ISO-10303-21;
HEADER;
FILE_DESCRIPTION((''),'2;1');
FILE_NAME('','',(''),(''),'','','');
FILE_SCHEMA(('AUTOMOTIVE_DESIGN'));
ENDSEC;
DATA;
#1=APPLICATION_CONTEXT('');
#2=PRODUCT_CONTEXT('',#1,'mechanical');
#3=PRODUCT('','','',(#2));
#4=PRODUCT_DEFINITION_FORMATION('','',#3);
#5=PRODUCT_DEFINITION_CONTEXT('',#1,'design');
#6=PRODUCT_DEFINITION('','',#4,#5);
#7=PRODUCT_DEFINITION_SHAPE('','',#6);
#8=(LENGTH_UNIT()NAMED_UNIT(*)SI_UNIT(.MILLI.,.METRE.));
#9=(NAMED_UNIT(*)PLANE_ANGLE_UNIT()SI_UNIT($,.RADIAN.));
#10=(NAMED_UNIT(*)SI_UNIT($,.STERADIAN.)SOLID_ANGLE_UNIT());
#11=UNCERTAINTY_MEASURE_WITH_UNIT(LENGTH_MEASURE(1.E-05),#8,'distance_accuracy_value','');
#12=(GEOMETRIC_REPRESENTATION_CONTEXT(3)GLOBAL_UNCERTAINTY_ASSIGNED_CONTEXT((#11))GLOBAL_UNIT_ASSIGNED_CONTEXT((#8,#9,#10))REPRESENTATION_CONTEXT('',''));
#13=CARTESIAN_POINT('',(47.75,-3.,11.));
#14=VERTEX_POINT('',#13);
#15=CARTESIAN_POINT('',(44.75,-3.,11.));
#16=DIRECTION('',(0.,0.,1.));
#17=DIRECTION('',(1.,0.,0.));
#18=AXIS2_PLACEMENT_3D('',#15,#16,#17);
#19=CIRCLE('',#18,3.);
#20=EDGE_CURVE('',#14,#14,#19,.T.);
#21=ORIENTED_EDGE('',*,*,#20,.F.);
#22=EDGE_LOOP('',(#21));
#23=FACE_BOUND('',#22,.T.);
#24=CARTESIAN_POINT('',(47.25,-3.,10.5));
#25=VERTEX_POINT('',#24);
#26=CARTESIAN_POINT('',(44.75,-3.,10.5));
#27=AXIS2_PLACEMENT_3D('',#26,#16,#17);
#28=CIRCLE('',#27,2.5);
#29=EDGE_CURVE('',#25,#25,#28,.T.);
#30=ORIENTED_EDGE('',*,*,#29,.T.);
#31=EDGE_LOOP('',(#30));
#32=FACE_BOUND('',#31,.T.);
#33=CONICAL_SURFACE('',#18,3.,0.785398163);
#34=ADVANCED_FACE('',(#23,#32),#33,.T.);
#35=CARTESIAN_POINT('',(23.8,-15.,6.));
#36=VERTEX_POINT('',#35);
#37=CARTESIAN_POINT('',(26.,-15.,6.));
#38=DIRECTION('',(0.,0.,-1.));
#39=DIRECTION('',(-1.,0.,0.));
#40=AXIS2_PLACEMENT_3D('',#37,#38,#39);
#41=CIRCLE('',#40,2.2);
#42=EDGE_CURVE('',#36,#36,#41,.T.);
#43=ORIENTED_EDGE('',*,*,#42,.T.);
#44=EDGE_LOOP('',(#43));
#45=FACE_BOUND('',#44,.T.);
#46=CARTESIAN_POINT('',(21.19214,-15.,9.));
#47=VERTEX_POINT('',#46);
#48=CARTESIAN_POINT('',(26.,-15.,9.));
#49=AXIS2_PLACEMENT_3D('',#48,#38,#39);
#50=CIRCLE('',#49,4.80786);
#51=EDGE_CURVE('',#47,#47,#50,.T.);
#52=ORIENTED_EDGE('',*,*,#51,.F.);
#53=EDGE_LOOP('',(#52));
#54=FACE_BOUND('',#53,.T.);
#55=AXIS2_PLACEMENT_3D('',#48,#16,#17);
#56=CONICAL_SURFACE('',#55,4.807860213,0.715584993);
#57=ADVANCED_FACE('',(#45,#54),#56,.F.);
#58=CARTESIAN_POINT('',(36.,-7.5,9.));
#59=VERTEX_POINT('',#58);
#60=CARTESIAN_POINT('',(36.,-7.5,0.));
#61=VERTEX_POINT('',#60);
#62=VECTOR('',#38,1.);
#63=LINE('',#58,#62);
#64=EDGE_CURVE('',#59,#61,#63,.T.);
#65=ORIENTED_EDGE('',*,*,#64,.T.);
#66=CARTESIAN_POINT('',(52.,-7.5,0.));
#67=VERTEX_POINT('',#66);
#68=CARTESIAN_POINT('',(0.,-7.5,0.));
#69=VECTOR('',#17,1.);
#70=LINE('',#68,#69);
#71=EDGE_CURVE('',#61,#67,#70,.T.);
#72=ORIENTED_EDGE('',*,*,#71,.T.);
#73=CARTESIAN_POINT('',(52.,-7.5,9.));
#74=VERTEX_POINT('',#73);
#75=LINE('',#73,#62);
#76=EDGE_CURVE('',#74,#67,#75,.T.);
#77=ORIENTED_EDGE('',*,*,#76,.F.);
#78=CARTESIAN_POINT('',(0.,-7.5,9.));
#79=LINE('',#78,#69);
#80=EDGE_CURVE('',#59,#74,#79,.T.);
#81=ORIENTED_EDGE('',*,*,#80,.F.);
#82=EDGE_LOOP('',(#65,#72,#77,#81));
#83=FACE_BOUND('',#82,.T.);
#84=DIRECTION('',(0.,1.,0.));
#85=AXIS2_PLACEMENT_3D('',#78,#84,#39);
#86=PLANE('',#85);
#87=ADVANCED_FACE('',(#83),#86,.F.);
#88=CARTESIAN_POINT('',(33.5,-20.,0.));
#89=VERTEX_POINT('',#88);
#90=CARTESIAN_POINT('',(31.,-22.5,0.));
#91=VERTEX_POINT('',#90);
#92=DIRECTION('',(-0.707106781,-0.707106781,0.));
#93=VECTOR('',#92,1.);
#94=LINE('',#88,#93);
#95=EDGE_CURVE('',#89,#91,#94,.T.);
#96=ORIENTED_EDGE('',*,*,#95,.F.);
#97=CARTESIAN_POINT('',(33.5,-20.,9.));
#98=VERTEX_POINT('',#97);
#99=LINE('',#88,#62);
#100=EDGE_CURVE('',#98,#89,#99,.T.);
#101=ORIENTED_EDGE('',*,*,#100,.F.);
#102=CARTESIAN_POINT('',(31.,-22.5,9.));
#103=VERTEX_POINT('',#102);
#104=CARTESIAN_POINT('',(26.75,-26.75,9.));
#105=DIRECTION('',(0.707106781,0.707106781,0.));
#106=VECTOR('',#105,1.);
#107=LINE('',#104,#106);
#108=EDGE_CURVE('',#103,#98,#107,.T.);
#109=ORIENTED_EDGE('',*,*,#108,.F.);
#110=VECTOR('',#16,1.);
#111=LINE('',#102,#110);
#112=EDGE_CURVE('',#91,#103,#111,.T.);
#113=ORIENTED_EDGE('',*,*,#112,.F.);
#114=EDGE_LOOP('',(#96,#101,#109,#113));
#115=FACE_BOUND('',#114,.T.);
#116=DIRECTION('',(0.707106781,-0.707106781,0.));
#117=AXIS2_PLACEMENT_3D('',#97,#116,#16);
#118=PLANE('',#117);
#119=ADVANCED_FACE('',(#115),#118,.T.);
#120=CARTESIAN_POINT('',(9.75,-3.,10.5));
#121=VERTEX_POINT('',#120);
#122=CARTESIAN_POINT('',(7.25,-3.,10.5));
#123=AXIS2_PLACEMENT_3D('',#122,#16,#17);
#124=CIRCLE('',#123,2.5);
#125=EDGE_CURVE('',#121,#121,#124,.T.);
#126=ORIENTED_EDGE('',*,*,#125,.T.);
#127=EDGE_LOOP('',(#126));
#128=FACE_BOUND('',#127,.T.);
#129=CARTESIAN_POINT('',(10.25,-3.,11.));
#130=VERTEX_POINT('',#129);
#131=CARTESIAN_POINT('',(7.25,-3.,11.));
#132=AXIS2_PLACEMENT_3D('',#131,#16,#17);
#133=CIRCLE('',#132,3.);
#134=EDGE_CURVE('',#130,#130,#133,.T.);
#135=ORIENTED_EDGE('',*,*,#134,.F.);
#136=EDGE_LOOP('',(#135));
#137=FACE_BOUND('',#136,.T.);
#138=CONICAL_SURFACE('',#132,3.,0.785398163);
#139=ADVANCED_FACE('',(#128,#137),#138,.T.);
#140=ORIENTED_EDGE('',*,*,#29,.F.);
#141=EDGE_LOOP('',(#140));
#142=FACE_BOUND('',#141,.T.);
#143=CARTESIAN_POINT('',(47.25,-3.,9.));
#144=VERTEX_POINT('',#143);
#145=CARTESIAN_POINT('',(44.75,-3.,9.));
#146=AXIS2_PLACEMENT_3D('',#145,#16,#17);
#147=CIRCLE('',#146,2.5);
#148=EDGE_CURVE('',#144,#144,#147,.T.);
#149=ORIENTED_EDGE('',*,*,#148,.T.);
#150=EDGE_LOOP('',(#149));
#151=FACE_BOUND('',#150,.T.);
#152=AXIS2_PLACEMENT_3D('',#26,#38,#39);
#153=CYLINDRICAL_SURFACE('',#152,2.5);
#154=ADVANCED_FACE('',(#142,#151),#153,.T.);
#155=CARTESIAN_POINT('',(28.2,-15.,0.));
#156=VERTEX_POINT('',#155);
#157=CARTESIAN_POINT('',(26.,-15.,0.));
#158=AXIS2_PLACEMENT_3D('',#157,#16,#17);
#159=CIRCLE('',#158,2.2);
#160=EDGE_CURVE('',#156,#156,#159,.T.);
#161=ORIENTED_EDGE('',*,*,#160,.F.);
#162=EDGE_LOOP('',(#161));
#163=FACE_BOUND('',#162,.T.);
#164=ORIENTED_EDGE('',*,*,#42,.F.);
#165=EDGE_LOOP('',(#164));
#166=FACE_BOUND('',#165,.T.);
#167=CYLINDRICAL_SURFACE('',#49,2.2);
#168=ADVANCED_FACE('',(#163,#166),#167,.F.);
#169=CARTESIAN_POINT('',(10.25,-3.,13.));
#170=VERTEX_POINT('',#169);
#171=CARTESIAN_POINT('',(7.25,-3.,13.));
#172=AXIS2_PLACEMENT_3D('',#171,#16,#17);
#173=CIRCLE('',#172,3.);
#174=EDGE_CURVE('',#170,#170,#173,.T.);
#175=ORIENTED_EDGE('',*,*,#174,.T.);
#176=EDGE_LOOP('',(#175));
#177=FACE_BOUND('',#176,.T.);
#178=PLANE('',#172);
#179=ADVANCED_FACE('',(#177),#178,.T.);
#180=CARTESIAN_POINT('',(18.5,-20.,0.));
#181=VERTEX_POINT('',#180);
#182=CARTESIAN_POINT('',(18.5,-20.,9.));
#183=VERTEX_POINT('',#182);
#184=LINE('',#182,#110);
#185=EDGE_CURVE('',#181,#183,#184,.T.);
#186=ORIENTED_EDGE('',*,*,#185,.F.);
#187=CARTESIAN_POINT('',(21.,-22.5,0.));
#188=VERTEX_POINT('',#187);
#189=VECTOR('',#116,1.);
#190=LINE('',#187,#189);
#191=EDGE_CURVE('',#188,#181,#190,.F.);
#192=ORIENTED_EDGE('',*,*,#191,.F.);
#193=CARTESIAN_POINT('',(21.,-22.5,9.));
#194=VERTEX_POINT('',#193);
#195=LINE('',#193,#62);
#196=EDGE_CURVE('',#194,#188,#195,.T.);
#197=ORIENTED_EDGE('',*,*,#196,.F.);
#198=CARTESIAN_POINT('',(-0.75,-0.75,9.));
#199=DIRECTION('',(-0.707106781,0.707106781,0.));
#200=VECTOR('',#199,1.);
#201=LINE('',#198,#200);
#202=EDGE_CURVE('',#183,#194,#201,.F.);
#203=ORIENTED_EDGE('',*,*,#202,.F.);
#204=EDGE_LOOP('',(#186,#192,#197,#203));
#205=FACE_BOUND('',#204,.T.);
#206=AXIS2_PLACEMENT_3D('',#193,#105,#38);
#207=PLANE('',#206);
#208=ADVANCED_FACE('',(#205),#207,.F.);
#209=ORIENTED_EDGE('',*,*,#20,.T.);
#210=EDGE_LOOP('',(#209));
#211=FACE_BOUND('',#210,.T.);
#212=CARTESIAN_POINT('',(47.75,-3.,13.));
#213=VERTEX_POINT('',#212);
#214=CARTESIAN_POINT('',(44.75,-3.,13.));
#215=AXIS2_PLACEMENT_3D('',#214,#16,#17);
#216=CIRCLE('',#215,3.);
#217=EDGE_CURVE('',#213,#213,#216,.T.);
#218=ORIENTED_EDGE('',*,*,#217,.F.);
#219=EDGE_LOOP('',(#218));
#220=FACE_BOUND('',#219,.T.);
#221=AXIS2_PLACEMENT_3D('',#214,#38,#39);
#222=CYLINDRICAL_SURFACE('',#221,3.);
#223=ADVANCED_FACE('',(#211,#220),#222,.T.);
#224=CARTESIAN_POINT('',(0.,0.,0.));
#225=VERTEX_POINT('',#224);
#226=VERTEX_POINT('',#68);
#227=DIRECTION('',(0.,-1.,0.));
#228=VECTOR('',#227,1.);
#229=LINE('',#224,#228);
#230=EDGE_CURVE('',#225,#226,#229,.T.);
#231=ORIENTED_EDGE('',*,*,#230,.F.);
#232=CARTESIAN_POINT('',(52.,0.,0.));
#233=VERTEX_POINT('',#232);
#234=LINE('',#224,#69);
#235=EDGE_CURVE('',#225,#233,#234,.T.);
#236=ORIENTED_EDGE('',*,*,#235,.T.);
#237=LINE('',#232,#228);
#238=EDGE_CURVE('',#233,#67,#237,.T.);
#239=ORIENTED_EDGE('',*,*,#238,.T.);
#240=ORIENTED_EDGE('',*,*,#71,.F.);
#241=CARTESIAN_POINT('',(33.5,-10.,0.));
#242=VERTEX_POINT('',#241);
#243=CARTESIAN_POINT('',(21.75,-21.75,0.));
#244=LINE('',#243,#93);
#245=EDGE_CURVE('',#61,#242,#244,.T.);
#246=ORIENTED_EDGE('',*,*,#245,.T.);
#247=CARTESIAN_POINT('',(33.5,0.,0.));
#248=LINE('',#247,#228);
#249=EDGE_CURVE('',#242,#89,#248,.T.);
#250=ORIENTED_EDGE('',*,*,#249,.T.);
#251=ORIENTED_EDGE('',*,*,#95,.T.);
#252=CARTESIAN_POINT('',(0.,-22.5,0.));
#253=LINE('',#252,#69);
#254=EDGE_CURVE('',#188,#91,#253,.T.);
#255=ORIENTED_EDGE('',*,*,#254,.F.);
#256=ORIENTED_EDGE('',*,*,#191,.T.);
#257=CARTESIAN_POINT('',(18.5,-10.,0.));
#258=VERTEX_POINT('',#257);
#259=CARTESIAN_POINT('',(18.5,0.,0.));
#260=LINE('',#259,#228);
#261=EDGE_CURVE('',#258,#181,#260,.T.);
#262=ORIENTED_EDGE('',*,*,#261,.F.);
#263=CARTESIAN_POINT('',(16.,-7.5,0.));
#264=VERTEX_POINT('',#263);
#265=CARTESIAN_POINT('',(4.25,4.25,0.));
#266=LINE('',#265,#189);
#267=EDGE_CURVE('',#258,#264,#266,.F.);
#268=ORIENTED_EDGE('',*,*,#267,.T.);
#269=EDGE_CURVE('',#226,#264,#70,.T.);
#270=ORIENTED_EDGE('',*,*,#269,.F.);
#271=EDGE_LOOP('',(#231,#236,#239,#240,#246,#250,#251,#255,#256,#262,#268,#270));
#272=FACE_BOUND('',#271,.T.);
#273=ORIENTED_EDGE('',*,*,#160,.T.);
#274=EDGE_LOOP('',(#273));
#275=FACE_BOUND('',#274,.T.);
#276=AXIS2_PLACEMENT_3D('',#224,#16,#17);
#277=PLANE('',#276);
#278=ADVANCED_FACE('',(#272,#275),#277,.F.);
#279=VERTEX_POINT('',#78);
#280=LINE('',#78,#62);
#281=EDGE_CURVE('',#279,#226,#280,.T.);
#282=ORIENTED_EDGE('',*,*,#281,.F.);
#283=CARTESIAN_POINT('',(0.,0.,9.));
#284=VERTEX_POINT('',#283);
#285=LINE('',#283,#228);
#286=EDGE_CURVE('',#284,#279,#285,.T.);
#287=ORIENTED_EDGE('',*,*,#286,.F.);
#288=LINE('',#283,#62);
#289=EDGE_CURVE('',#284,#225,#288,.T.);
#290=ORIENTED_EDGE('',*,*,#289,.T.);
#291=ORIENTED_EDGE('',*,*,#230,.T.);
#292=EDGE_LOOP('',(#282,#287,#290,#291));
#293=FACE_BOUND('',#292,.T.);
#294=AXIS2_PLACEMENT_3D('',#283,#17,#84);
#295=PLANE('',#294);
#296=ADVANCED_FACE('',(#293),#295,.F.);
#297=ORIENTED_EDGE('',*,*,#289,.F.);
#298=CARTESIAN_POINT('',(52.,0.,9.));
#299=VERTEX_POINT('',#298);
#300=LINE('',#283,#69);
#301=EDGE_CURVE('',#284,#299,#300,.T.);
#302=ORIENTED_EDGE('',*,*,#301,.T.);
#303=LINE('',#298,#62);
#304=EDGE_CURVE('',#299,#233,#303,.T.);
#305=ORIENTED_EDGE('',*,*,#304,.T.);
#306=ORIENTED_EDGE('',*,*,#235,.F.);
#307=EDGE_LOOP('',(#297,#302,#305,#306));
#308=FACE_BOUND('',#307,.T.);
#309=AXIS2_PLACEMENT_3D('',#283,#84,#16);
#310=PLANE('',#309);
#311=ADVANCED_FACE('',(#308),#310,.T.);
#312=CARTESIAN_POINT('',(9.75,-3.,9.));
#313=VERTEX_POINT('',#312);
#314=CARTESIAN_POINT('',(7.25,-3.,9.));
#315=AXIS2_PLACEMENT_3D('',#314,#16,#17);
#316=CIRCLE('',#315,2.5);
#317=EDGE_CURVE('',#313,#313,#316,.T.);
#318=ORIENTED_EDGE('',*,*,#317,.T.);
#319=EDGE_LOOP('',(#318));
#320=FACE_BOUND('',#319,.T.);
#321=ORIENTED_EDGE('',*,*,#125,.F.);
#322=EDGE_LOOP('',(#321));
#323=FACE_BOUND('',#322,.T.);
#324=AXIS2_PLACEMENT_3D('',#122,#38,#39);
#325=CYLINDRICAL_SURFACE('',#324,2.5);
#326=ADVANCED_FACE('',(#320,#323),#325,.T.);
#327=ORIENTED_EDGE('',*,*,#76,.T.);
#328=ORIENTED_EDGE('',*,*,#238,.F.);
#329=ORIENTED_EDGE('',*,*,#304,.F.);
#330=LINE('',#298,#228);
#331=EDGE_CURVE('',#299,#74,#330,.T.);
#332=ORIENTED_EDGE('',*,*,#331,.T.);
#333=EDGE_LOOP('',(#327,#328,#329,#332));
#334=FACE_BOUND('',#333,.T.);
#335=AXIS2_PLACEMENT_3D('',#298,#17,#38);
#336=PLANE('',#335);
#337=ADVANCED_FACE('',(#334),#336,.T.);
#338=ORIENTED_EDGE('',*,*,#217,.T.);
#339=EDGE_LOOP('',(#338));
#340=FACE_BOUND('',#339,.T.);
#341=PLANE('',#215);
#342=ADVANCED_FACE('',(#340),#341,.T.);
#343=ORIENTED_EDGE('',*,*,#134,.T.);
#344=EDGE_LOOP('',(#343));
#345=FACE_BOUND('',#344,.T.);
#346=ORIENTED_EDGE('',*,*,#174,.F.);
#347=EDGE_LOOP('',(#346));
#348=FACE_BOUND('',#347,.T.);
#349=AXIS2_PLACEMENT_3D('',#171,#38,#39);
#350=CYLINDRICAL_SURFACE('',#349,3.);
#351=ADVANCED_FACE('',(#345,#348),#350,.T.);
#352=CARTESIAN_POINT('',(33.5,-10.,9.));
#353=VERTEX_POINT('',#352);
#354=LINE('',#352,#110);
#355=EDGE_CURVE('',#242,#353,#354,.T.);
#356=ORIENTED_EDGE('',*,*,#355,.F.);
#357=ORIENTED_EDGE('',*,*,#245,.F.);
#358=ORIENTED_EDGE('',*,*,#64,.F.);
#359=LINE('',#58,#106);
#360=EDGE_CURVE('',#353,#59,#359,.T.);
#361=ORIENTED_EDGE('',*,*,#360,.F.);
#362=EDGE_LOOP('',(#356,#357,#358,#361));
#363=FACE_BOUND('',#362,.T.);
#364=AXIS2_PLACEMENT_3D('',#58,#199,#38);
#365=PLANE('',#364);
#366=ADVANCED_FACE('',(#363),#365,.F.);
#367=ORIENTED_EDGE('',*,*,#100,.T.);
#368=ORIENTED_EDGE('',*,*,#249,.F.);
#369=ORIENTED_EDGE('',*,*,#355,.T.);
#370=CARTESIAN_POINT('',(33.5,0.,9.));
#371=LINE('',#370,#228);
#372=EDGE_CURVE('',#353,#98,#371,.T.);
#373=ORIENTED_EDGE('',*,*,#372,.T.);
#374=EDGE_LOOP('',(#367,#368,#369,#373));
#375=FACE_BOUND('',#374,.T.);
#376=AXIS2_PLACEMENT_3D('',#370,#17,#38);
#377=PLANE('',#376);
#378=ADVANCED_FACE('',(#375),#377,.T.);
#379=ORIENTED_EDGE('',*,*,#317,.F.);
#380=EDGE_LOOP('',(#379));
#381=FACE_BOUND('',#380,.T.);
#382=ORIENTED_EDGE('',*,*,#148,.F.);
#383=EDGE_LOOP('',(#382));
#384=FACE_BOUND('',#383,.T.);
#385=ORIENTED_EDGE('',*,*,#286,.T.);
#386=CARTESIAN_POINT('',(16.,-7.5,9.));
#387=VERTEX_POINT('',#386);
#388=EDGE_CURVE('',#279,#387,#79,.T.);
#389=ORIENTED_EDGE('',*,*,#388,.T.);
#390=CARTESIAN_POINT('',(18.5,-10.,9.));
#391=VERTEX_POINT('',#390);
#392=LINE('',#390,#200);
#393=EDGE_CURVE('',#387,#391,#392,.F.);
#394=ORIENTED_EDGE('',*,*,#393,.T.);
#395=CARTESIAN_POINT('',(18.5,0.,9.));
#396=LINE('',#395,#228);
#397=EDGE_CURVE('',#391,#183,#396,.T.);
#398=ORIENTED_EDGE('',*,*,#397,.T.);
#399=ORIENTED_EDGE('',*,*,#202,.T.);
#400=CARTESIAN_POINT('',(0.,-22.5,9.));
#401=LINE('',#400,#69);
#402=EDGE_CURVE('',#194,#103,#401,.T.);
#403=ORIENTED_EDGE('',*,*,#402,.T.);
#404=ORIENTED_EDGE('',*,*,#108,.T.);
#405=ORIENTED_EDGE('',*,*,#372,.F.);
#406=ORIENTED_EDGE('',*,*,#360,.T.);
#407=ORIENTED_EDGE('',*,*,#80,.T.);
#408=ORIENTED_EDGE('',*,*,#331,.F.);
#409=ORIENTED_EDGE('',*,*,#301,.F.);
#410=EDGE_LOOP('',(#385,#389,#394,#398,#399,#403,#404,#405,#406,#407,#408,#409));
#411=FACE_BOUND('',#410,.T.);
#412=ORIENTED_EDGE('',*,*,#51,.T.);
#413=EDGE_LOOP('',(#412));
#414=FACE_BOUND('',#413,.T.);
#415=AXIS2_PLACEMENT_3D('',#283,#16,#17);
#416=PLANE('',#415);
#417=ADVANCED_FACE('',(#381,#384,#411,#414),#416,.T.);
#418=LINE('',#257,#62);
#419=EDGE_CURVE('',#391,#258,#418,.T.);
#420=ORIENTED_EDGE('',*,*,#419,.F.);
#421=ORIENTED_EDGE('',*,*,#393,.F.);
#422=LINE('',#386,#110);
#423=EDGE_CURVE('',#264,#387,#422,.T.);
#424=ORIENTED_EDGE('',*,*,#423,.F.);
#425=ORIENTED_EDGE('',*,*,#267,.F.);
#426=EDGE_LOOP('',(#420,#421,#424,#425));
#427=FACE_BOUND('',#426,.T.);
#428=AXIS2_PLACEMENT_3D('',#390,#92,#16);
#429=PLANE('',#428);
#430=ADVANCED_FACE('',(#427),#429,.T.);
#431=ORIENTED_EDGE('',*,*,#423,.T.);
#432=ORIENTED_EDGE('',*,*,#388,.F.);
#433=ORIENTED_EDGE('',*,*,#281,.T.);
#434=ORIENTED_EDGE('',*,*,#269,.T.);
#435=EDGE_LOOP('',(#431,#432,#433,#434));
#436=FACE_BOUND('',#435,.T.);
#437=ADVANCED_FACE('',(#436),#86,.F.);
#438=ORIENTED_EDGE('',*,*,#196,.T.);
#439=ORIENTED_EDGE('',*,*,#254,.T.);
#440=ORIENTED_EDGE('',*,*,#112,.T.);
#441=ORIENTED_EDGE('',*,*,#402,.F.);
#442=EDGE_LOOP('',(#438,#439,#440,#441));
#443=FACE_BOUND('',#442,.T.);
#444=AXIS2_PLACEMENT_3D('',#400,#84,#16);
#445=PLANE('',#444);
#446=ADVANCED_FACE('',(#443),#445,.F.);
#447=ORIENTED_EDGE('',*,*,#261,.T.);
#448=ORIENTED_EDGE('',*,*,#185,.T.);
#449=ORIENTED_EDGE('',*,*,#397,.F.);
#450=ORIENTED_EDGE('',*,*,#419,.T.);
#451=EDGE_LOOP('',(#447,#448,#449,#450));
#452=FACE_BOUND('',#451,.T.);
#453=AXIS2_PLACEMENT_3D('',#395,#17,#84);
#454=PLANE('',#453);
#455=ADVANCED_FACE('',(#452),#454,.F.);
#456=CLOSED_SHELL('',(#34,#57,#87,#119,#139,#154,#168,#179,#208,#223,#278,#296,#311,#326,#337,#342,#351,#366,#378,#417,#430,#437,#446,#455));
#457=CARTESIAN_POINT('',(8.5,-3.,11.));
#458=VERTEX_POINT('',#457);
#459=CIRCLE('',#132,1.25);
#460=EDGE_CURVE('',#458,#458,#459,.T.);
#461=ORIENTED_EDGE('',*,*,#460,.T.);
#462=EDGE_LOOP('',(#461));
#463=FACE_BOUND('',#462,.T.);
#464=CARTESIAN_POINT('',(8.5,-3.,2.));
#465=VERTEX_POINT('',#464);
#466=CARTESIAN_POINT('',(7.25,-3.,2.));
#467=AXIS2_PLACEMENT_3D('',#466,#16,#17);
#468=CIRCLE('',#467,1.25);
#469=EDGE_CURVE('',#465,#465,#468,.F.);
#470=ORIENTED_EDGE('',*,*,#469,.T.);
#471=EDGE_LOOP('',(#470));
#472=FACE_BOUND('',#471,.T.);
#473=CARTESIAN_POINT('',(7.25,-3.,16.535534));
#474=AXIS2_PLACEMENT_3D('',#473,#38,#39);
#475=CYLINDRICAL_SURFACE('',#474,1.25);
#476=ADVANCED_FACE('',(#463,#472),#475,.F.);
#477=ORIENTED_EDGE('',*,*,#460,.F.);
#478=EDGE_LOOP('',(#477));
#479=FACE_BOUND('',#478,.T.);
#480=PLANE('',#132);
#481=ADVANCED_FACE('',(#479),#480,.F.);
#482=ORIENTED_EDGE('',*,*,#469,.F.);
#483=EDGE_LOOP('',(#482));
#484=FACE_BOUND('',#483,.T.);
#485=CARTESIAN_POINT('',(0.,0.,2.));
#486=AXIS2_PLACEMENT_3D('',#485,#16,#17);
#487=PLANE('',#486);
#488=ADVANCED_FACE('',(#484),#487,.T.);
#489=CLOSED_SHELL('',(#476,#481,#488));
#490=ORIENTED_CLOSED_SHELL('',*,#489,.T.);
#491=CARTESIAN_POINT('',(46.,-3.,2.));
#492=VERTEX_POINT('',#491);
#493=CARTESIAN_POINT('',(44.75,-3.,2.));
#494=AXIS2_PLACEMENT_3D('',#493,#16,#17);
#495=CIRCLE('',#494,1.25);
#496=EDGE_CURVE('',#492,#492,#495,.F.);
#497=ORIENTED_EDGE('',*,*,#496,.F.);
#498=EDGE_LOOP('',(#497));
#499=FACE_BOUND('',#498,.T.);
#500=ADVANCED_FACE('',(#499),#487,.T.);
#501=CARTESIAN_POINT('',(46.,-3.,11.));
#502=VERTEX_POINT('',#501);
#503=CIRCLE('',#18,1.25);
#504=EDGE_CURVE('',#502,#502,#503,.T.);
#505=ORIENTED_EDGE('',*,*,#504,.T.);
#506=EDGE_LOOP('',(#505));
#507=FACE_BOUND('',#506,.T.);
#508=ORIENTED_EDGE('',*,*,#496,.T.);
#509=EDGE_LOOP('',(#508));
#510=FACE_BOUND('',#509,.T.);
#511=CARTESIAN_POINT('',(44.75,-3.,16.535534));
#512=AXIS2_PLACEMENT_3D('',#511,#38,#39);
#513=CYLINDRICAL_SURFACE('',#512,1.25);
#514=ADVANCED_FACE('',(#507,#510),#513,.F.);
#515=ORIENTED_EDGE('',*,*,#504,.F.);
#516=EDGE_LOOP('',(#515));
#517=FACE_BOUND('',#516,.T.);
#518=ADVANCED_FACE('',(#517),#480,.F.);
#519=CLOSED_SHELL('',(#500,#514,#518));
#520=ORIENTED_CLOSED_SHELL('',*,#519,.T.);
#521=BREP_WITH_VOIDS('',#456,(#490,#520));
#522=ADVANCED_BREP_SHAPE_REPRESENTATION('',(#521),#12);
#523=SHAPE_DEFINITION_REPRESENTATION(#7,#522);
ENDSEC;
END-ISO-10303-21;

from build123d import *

# Parameters (mm, degrees)
SKETCH1_W                = 52
SKETCH1_H                = 7.5
SKETCH1_R                = 2.5
SKETCH1_W_2              = 15
SKETCH1_H_2              = 15
SKETCH1_R_2              = 2.2
BOSS_EXTRUDE1_DEPTH      = 9
BOSS_EXTRUDE2_DEPTH      = 1.5
BOSS_EXTRUDE2_DEPTH_BACK = 9
SKETCH2_R                = 2.5
SKETCH4_R                = 3
BOSS_EXTRUDE3_DEPTH      = 2.5
CHAMFER1_SIZE            = 0.5
CHAMFER2_SIZE            = 2.5
CUT_EXTRUDE1_DEPTH       = 2
CUT_EXTRUDE1_DEPTH_BACK  = 7
SKETCH5_R                = 1.25


with BuildPart() as part:
    # Sketch1 → Boss-Extrude1 (new body)
    # profile 1 of 2: a face of its own
    with BuildSketch(Plane.XY):
        with Locations((26, -3.75)):
            Rectangle(SKETCH1_W, SKETCH1_H)
        with Locations((7.25, -3)):
            Circle(SKETCH1_R, mode=Mode.SUBTRACT)
        with Locations((44.75, -3)):
            Circle(SKETCH1_R, mode=Mode.SUBTRACT)
    # profile 2 of 2: a face of its own
    with BuildSketch(Plane.XY):
        with Locations((26, -15)):
            Rectangle(SKETCH1_W_2, SKETCH1_H_2)
        with Locations((26, -15)):
            Circle(SKETCH1_R_2, mode=Mode.SUBTRACT)
    extrude(amount=BOSS_EXTRUDE1_DEPTH)

    # Sketch2 → Boss-Extrude2 (add, two sides: drawn at the far end of the back side and taken through both)
    with BuildSketch(Plane.XY.offset(9).offset(-BOSS_EXTRUDE2_DEPTH_BACK)):
        with Locations((7.25, -3)):
            Circle(SKETCH2_R)
        with Locations((44.75, -3)):
            Circle(SKETCH2_R)
    extrude(amount=BOSS_EXTRUDE2_DEPTH + BOSS_EXTRUDE2_DEPTH_BACK)

    # Sketch3 → Cut-Revolve1 (revolve, cut)
    with BuildSketch(Plane(origin=(0, -15, 0), x_dir=(1, 0, 0), z_dir=(0, 1, 0)), mode=Mode.PRIVATE) as cut_revolve1_sk:
        Polygon((26, -9), (30.807860213, -9), (28.2, -6), (26, -6), align=None)
    revolve(cut_revolve1_sk.sketch.rotate(Axis((26, -15, 6), (0, 0, 1)), 180), axis=Axis((26, -15, 6), (0, 0, 1)), mode=Mode.SUBTRACT)

    # Sketch4 → Boss-Extrude3 (add)
    with BuildSketch(Plane.XY.offset(10.5)):
        with Locations((7.25, -3)):
            Circle(SKETCH4_R)
        with Locations((44.75, -3)):
            Circle(SKETCH4_R)
    extrude(amount=BOSS_EXTRUDE3_DEPTH)

    # Chamfer1
    chamfer1_edges = [part.edges().sort_by_distance(p)[0] for p in [
        (4.25, -3, 10.5),
        (41.75, -3, 10.5),
    ]]
    chamfer(chamfer1_edges, length=CHAMFER1_SIZE - 0.0001)  # a hair under: the kernel refuses the full size

    # Chamfer2
    chamfer2_edges = [part.edges().sort_by_distance(p)[0] for p in [
        (33.5, -7.5, 4.5),
        (33.5, -22.5, 4.5),
        (18.5, -22.5, 4.5),
        (18.5, -7.5, 4.5),
    ]]
    chamfer(chamfer2_edges, length=CHAMFER2_SIZE)

    # Sketch5 → Cut-Extrude1 (cut, two sides: drawn at the far end of the back side and taken through both)
    with BuildSketch(Plane.XY.offset(9).offset(-CUT_EXTRUDE1_DEPTH_BACK)):
        with Locations((7.25, -3)):
            Circle(SKETCH5_R)
        with Locations((44.75, -3)):
            Circle(SKETCH5_R)
    extrude(amount=CUT_EXTRUDE1_DEPTH + CUT_EXTRUDE1_DEPTH_BACK, mode=Mode.SUBTRACT)


solid = part.part
